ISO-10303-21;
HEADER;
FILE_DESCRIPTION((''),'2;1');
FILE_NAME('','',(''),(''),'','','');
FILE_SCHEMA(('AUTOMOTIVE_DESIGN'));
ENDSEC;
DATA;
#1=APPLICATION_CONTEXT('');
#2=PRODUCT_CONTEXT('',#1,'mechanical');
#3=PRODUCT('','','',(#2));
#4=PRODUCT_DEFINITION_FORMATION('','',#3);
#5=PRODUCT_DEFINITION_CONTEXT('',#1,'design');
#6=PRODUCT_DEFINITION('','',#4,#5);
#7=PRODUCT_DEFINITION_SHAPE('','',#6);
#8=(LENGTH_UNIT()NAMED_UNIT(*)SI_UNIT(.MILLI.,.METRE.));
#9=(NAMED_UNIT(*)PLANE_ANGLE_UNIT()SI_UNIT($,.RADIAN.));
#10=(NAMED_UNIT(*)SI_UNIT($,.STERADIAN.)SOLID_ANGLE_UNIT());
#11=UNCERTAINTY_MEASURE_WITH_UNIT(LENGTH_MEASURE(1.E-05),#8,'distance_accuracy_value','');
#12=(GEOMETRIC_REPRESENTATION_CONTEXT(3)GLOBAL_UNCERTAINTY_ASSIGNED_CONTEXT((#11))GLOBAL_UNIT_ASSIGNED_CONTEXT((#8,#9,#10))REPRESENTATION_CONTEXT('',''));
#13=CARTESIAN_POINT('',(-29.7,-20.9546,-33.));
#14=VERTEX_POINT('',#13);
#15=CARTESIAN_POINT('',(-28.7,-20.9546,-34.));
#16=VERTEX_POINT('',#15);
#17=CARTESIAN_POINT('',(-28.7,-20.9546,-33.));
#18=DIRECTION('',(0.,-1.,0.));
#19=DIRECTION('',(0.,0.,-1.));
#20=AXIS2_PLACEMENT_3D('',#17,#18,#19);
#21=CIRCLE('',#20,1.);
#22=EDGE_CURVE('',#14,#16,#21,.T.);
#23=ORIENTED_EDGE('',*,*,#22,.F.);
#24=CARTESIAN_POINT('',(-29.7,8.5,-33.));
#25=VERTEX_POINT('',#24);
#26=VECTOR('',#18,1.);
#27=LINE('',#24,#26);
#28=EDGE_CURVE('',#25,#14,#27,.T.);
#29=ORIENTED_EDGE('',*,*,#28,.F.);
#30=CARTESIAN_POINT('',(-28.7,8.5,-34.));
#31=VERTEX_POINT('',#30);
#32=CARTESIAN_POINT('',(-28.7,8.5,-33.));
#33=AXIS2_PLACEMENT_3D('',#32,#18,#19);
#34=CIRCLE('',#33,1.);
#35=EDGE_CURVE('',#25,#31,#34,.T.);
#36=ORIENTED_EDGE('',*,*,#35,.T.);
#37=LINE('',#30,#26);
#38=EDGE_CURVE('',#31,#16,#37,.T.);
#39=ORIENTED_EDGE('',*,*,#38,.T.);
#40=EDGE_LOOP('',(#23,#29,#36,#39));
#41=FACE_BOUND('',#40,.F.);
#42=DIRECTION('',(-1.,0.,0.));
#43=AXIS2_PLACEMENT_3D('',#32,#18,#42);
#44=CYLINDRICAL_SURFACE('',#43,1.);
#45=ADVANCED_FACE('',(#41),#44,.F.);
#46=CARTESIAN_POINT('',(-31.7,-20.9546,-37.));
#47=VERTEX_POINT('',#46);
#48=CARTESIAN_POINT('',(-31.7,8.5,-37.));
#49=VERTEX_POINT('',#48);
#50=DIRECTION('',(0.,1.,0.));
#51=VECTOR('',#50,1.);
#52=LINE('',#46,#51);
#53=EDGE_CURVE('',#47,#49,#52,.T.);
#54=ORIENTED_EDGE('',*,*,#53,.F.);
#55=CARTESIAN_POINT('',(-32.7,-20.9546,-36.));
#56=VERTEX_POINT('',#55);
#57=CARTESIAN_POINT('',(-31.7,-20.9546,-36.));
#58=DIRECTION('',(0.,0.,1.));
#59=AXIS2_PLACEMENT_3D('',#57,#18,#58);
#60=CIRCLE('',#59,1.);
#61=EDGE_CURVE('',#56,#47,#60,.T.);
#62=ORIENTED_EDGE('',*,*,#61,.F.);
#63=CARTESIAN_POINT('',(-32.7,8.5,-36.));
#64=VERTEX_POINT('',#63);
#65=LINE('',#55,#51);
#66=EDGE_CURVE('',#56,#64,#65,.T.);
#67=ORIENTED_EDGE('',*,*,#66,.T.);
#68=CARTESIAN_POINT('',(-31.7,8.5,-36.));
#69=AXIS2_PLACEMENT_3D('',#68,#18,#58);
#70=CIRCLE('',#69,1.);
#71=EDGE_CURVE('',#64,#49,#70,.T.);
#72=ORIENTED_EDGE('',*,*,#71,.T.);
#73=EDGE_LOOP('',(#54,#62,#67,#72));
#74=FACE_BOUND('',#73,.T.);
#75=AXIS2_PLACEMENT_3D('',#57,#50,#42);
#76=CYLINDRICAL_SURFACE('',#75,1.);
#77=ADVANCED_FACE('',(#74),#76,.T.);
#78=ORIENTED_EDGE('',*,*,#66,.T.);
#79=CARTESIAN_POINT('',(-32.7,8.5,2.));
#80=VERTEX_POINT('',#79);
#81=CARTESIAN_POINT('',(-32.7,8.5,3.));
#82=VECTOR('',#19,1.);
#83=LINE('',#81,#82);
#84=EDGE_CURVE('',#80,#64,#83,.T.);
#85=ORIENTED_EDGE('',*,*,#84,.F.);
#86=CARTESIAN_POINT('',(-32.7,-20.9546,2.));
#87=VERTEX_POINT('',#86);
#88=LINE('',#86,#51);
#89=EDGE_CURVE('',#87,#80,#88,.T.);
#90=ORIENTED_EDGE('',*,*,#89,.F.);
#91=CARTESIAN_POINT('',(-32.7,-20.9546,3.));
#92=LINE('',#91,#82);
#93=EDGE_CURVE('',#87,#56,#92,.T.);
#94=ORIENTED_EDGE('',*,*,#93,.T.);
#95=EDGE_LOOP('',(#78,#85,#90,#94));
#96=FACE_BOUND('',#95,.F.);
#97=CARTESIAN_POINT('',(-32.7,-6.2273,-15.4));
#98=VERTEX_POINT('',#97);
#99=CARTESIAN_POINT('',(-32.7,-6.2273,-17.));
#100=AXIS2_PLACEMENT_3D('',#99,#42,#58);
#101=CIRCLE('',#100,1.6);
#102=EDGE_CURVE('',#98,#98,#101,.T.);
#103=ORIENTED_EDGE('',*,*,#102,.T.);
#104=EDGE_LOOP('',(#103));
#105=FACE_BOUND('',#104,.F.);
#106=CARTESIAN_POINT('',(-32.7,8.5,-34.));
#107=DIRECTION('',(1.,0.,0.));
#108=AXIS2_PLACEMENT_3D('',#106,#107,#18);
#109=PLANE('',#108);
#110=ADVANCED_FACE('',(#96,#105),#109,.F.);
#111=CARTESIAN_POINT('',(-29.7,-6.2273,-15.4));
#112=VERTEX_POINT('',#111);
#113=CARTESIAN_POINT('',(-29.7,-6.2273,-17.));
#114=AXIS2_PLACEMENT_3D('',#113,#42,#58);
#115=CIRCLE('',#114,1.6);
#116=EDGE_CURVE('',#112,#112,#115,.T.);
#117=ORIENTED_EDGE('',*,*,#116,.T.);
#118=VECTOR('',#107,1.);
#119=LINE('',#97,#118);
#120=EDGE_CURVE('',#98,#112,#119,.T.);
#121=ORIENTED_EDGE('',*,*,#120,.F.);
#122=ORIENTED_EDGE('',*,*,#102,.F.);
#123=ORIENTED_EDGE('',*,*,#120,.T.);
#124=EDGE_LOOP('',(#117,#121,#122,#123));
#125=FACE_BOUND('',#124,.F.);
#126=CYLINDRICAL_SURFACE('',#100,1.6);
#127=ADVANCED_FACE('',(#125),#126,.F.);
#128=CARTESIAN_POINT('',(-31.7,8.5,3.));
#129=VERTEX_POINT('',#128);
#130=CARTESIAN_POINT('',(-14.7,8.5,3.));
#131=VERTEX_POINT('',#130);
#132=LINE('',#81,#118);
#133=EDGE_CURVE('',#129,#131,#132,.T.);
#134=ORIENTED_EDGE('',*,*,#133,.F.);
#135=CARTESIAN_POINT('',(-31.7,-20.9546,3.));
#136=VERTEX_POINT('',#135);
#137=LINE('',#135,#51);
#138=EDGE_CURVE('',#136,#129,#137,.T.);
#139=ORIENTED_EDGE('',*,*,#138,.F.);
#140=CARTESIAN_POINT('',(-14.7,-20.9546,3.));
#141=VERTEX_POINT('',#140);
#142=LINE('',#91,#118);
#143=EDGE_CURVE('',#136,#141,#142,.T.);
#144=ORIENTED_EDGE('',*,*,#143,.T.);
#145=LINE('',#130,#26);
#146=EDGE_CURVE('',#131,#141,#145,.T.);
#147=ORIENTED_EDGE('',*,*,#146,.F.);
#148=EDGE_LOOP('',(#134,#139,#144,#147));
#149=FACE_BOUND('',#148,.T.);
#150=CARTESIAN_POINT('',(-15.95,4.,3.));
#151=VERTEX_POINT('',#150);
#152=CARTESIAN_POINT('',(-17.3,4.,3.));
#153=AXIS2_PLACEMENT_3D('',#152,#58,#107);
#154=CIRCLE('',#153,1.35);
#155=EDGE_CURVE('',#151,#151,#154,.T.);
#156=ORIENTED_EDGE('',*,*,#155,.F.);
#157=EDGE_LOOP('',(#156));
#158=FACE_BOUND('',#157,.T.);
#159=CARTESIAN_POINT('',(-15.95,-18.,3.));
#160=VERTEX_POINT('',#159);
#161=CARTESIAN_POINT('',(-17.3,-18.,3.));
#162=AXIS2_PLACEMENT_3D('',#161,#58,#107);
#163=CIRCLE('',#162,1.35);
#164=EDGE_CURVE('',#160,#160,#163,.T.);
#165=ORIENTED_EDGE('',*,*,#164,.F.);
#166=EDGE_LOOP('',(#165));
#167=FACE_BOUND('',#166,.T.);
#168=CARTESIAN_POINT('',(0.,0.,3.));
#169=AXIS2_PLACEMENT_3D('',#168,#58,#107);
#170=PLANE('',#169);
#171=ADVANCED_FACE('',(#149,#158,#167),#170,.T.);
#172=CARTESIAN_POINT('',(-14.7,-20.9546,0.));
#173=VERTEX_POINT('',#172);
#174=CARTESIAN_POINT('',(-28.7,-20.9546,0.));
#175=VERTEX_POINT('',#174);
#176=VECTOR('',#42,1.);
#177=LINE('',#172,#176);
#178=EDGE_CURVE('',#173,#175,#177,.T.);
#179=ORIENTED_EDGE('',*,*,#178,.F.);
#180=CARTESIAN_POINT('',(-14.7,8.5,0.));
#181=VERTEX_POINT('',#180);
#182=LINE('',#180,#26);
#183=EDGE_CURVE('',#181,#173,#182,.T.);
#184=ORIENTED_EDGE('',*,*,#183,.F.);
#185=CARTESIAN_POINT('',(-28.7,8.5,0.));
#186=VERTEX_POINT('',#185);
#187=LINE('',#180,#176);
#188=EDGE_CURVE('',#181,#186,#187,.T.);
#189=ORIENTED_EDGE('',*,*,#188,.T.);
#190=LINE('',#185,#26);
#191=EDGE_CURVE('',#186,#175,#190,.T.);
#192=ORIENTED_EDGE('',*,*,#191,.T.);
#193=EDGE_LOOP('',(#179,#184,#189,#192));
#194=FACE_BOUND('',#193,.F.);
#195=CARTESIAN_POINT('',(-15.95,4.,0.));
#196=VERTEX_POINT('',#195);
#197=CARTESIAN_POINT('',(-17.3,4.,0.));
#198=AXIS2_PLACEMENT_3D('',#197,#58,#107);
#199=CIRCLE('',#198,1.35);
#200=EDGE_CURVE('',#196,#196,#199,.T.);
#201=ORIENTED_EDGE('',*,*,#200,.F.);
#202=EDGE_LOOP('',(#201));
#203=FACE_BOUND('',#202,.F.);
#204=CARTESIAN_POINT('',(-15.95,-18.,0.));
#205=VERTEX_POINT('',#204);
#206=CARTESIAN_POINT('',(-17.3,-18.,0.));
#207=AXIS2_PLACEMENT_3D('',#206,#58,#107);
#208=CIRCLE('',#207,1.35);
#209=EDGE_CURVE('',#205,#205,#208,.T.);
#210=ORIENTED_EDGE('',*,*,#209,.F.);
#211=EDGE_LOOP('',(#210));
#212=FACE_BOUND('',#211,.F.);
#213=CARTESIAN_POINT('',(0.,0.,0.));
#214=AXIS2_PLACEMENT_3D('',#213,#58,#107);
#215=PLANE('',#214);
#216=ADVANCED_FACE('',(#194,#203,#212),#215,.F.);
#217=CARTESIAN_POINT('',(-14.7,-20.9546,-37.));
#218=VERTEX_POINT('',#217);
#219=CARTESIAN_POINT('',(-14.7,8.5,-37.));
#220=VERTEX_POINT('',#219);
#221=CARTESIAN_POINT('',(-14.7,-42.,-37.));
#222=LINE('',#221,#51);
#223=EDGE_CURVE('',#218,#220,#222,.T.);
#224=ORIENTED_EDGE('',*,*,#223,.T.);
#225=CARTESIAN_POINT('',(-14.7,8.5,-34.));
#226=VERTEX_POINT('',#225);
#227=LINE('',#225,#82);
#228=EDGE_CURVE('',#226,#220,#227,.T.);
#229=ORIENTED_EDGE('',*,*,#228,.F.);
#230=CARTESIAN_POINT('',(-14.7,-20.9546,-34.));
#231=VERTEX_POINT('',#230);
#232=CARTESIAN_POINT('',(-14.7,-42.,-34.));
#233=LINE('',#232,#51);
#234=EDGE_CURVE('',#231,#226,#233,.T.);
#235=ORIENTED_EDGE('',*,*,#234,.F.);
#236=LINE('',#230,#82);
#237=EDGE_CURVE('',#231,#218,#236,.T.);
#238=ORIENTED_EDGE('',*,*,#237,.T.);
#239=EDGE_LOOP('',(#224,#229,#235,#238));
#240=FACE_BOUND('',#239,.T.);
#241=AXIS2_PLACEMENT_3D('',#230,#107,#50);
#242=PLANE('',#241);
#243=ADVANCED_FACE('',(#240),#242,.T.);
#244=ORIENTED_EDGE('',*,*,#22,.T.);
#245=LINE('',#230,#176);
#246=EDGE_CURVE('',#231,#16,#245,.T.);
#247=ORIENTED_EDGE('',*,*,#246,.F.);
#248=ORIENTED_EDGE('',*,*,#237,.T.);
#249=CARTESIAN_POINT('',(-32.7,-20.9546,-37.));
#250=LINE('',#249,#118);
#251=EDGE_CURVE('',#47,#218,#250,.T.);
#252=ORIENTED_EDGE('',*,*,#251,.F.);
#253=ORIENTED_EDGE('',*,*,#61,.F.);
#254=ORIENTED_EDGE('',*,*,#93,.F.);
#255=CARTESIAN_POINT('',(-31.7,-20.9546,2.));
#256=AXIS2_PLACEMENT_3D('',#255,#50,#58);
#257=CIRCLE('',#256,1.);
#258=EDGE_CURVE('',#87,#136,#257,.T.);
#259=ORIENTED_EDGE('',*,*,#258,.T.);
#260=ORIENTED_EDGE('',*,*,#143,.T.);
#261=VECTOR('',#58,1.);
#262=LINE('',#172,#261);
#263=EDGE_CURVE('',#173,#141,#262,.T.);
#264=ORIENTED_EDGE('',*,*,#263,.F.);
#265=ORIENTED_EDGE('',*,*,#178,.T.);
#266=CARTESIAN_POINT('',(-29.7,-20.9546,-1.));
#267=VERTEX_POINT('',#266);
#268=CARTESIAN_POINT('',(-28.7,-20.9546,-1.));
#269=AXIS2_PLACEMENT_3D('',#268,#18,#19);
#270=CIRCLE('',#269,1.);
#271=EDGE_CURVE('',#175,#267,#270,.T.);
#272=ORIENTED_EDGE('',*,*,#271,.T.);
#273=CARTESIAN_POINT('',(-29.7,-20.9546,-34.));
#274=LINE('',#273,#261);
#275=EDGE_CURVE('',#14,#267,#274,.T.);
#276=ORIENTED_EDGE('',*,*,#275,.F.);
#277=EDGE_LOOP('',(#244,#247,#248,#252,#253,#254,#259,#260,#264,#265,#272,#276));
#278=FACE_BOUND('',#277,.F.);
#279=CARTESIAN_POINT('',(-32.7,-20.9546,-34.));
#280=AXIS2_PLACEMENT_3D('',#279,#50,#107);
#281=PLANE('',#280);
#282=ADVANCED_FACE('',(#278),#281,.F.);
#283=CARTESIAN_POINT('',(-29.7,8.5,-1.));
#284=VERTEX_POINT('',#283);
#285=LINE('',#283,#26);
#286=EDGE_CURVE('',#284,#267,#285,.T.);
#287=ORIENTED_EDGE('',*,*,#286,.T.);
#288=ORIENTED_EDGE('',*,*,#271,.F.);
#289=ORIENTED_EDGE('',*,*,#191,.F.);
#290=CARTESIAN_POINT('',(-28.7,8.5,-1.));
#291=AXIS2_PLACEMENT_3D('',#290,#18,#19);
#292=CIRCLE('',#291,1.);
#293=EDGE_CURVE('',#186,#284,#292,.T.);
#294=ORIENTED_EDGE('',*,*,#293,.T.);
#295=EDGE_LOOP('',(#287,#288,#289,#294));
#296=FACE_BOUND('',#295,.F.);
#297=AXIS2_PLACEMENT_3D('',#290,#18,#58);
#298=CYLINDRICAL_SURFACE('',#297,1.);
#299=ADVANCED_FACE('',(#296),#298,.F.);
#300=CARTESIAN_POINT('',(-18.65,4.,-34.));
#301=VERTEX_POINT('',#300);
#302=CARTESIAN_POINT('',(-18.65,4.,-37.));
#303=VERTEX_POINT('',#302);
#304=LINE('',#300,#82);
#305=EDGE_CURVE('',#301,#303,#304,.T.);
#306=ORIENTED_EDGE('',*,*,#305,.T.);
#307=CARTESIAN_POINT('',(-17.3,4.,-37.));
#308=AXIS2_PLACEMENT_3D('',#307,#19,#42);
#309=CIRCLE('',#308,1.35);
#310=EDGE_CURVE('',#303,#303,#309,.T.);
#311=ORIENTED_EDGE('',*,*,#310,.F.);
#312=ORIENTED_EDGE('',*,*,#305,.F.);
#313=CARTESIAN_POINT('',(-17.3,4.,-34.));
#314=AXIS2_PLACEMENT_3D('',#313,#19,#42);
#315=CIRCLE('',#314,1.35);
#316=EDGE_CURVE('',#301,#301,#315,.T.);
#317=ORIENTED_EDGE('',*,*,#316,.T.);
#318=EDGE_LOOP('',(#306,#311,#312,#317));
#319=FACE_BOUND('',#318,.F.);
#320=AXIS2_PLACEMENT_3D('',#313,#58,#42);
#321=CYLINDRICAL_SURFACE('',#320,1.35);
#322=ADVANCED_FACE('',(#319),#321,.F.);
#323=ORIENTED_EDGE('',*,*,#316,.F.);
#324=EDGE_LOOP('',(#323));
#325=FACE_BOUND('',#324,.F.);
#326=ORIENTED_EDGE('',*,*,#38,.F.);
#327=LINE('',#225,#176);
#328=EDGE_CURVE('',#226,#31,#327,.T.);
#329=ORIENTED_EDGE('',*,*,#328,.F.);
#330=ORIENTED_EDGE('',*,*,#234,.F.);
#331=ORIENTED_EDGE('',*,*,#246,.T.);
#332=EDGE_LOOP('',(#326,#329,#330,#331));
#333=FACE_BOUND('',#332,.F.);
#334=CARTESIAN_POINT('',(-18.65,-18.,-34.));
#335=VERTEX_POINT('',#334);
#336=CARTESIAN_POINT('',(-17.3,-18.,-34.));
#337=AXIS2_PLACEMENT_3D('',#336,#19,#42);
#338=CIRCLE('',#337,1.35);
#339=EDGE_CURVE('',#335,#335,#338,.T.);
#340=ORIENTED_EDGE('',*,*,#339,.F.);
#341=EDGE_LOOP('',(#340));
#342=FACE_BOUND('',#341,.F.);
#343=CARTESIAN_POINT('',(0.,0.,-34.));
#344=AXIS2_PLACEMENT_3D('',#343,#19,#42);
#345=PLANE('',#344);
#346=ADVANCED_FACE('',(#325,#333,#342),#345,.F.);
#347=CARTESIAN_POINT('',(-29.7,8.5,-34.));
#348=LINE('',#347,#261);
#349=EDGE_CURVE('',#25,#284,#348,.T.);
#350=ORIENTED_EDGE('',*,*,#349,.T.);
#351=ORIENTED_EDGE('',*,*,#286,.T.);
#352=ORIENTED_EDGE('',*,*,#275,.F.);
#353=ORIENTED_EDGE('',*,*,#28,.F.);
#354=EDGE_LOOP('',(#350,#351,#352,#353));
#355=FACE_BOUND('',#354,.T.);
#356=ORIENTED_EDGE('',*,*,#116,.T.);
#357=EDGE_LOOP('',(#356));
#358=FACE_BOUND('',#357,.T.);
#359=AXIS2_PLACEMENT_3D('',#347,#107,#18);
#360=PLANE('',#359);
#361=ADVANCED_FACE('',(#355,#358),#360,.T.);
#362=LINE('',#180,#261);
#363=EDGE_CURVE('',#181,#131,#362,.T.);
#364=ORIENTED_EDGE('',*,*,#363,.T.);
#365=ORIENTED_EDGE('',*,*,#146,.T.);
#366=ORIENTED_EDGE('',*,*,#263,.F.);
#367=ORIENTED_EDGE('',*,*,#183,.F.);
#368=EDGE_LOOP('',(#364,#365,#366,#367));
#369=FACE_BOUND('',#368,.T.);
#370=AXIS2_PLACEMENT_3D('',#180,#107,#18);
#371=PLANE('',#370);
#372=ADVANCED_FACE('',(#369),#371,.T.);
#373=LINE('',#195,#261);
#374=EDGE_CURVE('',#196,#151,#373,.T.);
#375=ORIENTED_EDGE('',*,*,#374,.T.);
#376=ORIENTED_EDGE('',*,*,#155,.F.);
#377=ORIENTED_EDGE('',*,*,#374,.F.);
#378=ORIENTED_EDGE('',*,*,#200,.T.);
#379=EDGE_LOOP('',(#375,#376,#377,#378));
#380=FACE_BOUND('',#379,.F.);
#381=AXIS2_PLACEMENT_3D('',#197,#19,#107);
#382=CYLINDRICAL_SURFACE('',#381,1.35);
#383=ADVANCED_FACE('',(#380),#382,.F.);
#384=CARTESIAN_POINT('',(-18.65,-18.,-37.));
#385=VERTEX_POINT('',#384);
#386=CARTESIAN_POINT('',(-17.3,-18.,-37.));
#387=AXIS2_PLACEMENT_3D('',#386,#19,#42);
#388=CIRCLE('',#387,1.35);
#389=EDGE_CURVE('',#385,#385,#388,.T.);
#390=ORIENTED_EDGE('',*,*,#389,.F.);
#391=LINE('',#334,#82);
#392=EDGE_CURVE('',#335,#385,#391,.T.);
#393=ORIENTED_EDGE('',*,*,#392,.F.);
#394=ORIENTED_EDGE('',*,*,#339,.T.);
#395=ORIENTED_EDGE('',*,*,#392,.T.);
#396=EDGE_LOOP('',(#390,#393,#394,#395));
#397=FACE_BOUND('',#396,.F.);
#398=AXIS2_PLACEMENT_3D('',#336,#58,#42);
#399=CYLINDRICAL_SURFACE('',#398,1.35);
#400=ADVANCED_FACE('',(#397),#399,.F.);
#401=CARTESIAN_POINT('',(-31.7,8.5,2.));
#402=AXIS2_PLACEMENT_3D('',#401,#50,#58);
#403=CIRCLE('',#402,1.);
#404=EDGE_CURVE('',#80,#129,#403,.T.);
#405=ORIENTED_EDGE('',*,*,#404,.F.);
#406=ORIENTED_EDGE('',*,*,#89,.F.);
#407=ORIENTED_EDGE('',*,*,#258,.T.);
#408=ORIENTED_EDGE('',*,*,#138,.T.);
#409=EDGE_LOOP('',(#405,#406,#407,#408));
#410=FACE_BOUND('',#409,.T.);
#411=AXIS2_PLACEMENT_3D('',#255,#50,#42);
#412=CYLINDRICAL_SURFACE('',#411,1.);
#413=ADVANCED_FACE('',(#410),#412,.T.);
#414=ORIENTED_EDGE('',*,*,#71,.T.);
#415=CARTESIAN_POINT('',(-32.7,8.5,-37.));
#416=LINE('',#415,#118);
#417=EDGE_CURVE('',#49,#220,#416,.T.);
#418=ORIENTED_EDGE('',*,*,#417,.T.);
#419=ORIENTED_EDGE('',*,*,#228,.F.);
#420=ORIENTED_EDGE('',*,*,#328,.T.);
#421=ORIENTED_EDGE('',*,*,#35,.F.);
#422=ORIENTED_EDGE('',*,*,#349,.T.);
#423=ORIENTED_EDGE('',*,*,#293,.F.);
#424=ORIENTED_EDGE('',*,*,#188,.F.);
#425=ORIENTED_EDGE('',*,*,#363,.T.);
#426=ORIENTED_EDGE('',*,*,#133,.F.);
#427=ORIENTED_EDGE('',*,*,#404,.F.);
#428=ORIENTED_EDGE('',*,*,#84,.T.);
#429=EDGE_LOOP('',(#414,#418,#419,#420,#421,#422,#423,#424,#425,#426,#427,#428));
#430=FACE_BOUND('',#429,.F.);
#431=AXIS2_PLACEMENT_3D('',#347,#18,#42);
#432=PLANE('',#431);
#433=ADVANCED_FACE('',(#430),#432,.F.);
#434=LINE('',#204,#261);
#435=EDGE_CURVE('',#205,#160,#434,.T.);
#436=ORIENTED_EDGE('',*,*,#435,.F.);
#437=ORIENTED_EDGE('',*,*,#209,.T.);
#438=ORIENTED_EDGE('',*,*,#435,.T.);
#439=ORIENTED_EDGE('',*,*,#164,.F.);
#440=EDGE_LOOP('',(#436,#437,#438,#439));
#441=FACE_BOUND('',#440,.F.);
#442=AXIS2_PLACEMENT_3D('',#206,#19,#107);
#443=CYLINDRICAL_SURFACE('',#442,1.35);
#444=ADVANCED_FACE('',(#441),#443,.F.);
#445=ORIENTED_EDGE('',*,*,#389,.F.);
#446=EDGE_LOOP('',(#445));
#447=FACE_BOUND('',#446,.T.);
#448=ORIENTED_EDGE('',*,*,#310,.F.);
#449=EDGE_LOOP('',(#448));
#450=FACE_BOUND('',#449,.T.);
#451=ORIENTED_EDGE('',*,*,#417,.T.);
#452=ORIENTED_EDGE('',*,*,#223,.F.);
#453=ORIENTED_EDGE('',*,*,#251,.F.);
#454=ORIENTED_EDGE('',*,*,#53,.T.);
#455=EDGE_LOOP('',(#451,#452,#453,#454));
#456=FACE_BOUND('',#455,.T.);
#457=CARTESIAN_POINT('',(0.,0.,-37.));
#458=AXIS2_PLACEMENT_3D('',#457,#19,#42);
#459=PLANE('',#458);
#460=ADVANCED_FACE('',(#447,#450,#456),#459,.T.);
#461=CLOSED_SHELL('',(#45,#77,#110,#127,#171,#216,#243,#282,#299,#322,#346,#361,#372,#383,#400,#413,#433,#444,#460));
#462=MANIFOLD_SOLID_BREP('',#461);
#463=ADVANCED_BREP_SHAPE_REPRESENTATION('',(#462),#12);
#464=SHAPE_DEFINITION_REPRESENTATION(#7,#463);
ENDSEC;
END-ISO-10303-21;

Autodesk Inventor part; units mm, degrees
ref_plane "YZ Plane" through (0, 0, 0) normal (1, 0, 0) x (0, 1, 0)
ref_plane "XZ Plane" through (0, 0, 0) normal (0, 1, 0) x (-1, 0, 0)
ref_plane "XY Plane" through (0, 0, 0) normal (0, 0, 1) x (1, 0, 0)
ref_plane "작업 평면1" through (0, 0, -34) normal (0, 0, -1) x (-1, 0, 0)
sketch "스케치1" plane through (0, 0, -34) normal (0, 0, -1) x (-1, 0, 0)
  circle A0 centre (17.3, -18) radius 1.35 projected
  line L0 (20.1, -44.6) -> (20.1, 8.5) projected
  line L1 (14.5, -42) -> (14.5, 11.5) projected
  circle A1 centre (17.3, 4) radius 1.35 projected
  circle A2 centre (17.3, -18) radius 1.45
  circle A3 centre (17.3, 4) radius 1.45
  line L2 (14.7, -42) -> (14.7, 11.5)
  line L3 (14.7, 11.5) -> (20.1, 8.5)
  line L4 (14.7, -20.9546) -> (32.7, -20.9546)
  line L5 (32.7, -20.9546) -> (32.7, 8.5)
  line L6 (32.7, 8.5) -> (20.1, 8.5)
  line L7 (32.7, -20.9546) -> (26.7, -20.9546)
  line L8 (26.7, -20.9546) -> (26.7, 8.5)
  line L9 (26.7, 8.5) -> (32.7, 8.5)
  line L10 (32.7, 8.5) -> (32.7, -20.9546)
  line L11 (20.1, 8.5) -> (14.7, 8.5)
  point P0 (0, 0)
  dimension "d0" = 0.1
  dimension "d1" = 0.1
  dimension "d2" = 0.2
  dimension "d3" = 18
  dimension "d8" = 6
extrude "돌출1" add sketch "스케치1" along normal blind 3 contours L4 L2 L11 L0 | L0 L6 L8 L4 | L8 L6 L5 L4 | A2 | A3
sketch "스케치2" plane through (0, 0, -34) normal (0, 0, 1) x (1, 0, 0)
  line L0 (-20.1, 8.5) -> (-14.7, 11.5) projected
  line L1 (-14.7, 8.5) -> (-14.7, -20.9546) projected
  line L2 (-20.1, -44.6) -> (-20.1, 8.5) projected
  line L3 (-32.7, 8.5) -> (-14.7, 8.5) projected
  line L4 (-32.7, -20.9546) -> (-32.7, 8.5) projected
  line L5 (-14.7, -20.9546) -> (-32.7, -20.9546) projected
  line L6 (-20.1, -20.9546) -> (-32.7, -20.9546)
  line L7 (-32.7, -20.9546) -> (-32.7, 8.5)
  line L8 (-32.7, 8.5) -> (-20.1, 8.5)
  line L9 (-20.1, 8.5) -> (-20.1, -20.9546)
  line L10 (-20.1, -20.9546) -> (-14.7, -20.9546)
  line L11 (-14.7, 11.5) -> (-20.1, 8.5)
  circle A0 centre (-17.3, -18) radius 1.45 projected
  circle A1 centre (-17.3, 4) radius 1.35 projected
  circle A2 centre (-17.3, 4) radius 1.45 projected
  circle A3 centre (-17.3, 4) radius 1.45
  circle A4 centre (-17.3, -18) radius 1.45
  point P0 (0, 0)
ref_plane "작업 평면2" through (0, 0, 0) normal (0, 0, 1) x (1, 0, 0)
sketch "스케치3" plane through (0, 0, 0) normal (0, 0, 1) x (1, 0, 0)
  line L0 (-32.7, 8.5) -> (-14.7, 8.5) projected
  line L1 (-32.7, -20.9546) -> (-32.7, 8.5) projected
  line L2 (-14.7, -20.9546) -> (-32.7, -20.9546) projected
  line L3 (-14.7, 8.5) -> (-14.7, -20.9546) projected
  line L4 (-20.1, -20.9546) -> (-32.7, -20.9546)
  line L5 (-32.7, -20.9546) -> (-32.7, 8.5)
  line L6 (-32.7, 8.5) -> (-20.1, 8.5)
  line L7 (-20.1, 8.5) -> (-20.1, -20.9546)
  line L8 (-32.7, -20.9546) -> (-20.1, -20.9546)
  line L9 (-20.1, -20.9546) -> (-20.1, 8.5)
  line L10 (-20.1, 8.5) -> (-32.7, 8.5)
  line L11 (-32.7, 8.5) -> (-32.7, -20.9546)
  line L12 (-20.1, -20.9546) -> (-14.7, -20.9546)
  line L13 (-14.7, 8.5) -> (-14.7, -20.9546) projected
  line L14 (-14.7, 11.5) -> (-20.1, 8.5)
  circle A0 centre (-17.3, -18) radius 1.45
  circle A1 centre (-17.3, 4) radius 1.45
  circle A2 centre (-17.3, 4) radius 1.35 projected
  circle A3 centre (-17.3, 4) radius 1.35
  circle A4 centre (-17.3, -18) radius 1.35
  point P0 (0, 0)
  dimension "d25" = 2.7
  dimension "d26" = 2.7
extrude "돌출2" add sketch "스케치3" along normal blind 3 contours L0 L7 L2 L1 | L0 L3 L2 L7 | A0 | A1
sketch "스케치4" plane through (0, 0, -34) normal (0, 0, 1) x (1, 0, 0)
  line L0 (-14.7, -20.9546) -> (-14.7, 8.5) projected
  line L1 (-14.7, 8.5) -> (-32.7, 8.5) projected
  line L2 (-32.7, 8.5) -> (-32.7, -20.9546) projected
  line L3 (-32.7, -20.9546) -> (-14.7, -20.9546) projected
  line L4 (-32.7, 8.5) -> (-26.7, 8.5)
  line L5 (-26.7, -20.9546) -> (-32.7, -20.9546)
  line L6 (-32.7, -20.9546) -> (-32.7, 8.5)
  line L7 (-32.7, 8.5) -> (-29.7, 8.5)
  line L8 (-29.7, 8.5) -> (-29.7, -20.9546)
  line L9 (-29.7, -20.9546) -> (-32.7, -20.9546)
  line L10 (-32.7, -20.9546) -> (-32.7, 8.5)
  point P0 (0, 0)
  point P1 (-29.7, -20.9546)
  dimension "d9" = 6
  dimension "d23" = 3
extrude "돌출3" add sketch "스케치4" along normal up to surface (34 mm away) contours L3 L2 L1 L8
sketch "스케치6" plane through (-32.7, -20.9546, -37) normal (-1, 0, 0) x (0, 0, 1)
  line L0 (40, 29.4546) -> (0, 29.4546) projected
  line L1 (0, 0) -> (0, 29.4546) projected
  line L2 (0, 0) -> (40, 0) projected
  line L3 (40, 29.4546) -> (40, 0) projected
  circle A0 centre (20, 14.7273) radius 1.6
  point P0 (37, 20.9546)
  dimension "d24" = 3.2
extrude "돌출5" cut sketch "스케치6" against normal blind 10 contours A0
fillet "모깎기1" radius 1 4 edges at (-32.7, -6.2273, 3) (-32.7, -6.2273, -37) (-29.7, -6.2273, -34) (-29.7, -6.2273, 0)
properties part number "3D_ankle1" material "PMMA 플라스틱"
